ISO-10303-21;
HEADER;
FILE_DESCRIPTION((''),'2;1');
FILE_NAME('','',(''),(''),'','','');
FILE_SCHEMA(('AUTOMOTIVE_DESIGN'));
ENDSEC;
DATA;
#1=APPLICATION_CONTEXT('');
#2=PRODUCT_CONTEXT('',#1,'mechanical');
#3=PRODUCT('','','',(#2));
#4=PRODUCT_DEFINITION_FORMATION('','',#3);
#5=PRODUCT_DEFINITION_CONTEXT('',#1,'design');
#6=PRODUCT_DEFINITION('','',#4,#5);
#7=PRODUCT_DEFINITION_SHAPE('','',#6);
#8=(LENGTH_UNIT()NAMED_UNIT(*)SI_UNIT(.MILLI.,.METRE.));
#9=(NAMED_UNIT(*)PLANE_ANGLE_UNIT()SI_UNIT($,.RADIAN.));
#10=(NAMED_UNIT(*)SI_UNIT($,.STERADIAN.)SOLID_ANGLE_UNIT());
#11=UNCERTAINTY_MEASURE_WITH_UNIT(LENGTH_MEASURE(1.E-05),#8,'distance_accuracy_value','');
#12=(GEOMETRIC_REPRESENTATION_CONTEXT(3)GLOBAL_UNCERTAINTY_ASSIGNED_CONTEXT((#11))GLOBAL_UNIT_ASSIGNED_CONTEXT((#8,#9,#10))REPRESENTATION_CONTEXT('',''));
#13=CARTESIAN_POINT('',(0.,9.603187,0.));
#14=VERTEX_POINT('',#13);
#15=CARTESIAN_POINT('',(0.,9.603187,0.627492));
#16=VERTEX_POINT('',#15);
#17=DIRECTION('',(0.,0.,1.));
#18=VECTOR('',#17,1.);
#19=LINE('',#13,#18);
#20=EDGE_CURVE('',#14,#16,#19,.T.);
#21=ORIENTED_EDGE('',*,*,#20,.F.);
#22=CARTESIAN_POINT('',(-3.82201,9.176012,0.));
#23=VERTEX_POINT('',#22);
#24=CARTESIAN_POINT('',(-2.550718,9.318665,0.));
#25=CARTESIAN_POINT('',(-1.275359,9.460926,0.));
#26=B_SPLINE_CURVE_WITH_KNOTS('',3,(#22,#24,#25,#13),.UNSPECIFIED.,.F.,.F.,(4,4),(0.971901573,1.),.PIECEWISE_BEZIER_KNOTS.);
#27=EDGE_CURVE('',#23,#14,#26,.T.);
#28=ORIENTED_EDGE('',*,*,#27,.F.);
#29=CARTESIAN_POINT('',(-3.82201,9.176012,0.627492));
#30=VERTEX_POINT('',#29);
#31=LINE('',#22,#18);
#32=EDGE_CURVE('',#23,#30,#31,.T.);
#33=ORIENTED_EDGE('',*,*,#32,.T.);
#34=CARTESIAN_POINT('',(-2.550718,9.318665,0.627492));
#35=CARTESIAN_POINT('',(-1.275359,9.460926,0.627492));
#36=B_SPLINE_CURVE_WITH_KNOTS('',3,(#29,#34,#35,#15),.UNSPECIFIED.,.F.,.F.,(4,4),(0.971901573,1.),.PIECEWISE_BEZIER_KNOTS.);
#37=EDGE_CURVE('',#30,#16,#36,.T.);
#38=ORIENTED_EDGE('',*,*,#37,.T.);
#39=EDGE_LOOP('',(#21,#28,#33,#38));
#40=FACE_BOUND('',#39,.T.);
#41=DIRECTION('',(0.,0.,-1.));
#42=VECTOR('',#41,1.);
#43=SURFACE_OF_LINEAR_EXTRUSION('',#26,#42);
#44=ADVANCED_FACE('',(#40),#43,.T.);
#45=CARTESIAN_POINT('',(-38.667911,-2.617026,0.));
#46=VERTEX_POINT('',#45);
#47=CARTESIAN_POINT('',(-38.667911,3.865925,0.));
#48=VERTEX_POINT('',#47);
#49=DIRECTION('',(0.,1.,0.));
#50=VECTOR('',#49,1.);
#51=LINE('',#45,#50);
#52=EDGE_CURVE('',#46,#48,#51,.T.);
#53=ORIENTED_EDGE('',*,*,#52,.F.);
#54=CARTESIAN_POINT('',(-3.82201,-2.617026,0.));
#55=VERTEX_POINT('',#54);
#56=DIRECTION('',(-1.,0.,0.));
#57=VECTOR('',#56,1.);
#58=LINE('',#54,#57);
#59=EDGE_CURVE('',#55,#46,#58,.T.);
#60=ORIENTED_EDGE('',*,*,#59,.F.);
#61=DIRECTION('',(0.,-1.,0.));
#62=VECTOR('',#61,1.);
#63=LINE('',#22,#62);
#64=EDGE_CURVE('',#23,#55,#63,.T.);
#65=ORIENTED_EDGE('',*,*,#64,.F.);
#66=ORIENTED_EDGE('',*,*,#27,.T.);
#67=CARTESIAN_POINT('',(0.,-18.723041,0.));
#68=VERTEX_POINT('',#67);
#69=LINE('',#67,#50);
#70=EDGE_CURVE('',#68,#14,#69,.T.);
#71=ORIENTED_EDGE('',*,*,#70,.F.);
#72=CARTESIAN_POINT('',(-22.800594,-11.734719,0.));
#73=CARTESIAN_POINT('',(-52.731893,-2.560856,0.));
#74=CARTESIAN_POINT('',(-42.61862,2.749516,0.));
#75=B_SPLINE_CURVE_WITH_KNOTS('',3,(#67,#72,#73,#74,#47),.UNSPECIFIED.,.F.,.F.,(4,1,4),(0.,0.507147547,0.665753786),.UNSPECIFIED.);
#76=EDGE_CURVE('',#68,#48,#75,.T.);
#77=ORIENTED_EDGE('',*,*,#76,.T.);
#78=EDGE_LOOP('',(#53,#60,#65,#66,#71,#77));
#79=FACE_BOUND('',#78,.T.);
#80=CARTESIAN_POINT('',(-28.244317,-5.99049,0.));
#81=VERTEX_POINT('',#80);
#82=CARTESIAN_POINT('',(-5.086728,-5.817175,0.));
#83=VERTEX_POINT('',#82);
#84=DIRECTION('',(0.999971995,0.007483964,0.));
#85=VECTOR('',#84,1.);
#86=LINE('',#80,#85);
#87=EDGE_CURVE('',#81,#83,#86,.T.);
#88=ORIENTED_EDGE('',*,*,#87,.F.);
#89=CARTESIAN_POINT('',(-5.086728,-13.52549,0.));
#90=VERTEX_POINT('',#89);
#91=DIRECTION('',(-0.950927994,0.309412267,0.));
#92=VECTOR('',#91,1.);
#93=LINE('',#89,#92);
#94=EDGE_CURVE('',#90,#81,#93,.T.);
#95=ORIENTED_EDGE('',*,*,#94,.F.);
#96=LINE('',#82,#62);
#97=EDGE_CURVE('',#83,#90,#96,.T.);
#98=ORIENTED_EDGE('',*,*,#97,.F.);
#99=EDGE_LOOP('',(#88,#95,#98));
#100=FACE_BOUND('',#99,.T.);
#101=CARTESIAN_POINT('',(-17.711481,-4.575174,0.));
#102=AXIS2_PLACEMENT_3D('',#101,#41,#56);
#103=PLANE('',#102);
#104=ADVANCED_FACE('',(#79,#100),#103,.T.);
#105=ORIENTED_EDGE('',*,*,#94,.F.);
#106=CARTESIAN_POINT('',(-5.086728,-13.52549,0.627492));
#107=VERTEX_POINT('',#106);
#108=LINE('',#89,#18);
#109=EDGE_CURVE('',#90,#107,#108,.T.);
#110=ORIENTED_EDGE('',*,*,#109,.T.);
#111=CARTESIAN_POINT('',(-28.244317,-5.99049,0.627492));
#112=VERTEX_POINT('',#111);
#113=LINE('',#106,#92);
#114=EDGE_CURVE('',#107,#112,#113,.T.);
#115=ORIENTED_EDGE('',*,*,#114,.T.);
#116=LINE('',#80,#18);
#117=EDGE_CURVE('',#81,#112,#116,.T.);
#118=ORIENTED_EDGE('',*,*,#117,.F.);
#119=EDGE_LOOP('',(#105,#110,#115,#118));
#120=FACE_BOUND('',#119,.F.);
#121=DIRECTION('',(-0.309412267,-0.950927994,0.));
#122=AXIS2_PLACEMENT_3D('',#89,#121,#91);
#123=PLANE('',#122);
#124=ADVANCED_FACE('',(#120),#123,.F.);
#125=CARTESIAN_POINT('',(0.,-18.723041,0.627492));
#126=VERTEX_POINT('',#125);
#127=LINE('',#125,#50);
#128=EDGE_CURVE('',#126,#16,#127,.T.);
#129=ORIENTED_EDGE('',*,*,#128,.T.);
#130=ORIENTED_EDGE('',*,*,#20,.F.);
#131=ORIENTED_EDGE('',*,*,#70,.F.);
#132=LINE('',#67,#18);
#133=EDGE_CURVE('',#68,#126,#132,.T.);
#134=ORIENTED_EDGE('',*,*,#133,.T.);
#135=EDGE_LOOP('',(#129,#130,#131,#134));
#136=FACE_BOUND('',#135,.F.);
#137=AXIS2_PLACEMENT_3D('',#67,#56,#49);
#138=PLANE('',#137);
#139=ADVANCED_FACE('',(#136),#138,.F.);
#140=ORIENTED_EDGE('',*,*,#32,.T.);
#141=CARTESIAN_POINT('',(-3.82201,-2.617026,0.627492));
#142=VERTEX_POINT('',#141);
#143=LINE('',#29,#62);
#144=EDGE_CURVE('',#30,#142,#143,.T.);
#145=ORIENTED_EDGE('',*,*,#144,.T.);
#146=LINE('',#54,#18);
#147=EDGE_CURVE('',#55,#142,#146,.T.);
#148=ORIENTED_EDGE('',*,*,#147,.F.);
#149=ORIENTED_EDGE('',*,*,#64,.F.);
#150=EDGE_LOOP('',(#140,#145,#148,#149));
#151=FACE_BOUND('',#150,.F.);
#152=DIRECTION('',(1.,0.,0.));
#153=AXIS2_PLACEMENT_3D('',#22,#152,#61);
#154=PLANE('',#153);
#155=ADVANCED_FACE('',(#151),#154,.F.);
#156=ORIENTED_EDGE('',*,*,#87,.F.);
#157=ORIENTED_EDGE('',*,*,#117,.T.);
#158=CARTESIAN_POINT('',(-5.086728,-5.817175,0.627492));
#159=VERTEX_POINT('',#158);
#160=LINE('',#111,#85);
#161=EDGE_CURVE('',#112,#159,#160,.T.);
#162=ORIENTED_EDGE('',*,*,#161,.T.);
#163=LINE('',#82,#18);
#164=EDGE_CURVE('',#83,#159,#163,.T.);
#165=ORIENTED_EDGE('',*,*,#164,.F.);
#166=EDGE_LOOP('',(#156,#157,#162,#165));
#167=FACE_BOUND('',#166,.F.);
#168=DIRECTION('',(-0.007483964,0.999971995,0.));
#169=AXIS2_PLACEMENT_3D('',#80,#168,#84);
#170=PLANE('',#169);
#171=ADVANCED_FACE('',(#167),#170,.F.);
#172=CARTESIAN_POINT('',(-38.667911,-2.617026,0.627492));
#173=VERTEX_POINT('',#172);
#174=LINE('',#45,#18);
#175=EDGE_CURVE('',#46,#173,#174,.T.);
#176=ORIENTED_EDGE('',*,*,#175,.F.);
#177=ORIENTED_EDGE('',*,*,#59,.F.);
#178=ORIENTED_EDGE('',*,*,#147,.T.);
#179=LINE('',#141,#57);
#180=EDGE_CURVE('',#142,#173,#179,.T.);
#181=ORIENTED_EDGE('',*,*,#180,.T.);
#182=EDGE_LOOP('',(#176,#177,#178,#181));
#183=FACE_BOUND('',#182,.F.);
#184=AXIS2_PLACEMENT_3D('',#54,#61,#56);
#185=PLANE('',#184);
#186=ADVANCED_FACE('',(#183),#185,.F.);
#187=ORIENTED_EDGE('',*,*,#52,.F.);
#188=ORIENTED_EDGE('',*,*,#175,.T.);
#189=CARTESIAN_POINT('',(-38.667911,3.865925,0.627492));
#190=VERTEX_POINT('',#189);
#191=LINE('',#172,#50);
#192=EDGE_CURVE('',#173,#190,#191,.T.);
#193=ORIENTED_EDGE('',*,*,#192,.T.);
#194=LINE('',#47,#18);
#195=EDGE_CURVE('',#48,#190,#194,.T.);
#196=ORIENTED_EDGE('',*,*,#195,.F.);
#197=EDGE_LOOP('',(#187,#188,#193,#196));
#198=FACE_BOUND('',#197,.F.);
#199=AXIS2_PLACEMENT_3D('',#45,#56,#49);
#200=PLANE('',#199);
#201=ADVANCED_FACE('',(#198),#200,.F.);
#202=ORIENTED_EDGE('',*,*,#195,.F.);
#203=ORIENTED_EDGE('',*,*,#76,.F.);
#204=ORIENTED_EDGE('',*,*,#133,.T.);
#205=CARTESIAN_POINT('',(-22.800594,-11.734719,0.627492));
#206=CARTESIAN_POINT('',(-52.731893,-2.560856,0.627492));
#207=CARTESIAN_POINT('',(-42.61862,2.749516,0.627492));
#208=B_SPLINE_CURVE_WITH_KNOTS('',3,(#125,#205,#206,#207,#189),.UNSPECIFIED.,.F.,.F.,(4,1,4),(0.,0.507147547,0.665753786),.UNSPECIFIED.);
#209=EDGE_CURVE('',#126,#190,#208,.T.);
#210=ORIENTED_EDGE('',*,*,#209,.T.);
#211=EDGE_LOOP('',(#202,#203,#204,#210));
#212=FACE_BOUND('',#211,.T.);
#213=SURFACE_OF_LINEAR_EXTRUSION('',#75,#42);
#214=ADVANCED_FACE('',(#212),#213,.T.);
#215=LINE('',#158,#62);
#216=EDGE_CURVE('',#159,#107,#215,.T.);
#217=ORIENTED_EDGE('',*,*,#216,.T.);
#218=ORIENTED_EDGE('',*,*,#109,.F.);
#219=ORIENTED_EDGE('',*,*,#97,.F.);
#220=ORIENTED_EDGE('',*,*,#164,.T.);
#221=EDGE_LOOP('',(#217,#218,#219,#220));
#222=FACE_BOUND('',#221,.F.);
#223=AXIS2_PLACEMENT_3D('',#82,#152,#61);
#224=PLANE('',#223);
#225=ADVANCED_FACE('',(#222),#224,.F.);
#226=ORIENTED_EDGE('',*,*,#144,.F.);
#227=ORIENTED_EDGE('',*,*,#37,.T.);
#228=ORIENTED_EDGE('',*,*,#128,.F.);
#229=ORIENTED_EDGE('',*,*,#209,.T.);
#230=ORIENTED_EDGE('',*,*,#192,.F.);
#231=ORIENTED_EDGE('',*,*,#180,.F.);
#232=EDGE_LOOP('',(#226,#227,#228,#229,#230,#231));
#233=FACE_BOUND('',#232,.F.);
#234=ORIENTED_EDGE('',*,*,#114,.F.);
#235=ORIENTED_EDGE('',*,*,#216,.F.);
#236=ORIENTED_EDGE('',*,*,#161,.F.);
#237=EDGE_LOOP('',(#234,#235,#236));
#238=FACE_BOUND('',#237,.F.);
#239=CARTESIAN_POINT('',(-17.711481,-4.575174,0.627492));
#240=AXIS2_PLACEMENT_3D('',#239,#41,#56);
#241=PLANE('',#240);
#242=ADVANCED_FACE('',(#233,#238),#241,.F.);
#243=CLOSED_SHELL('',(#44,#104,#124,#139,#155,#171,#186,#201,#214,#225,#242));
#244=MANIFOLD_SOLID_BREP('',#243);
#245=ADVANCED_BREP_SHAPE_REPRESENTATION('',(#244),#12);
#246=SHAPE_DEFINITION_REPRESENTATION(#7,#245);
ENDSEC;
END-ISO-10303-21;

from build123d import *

# Parameters (mm, degrees)
F1_DEPTH = 0.6274920888


with BuildPart() as f1:
    # F0 (on Top) → F1 (new body)
    with BuildSketch(Plane.XY):
        with BuildLine():
            add(Edge.make_bspline(
                [(0, -18.7230408192), (-22.8005940455, -11.7347187551), (-52.7318931928, -2.5608557428), (-42.6186198614, 2.7495160437), (-38.6679108208, 3.8659247252)],
                knots=[0, 0, 0, 0, 0.5071475473, 0.6657537861, 0.6657537861, 0.6657537861, 0.6657537861], degree=3))
            Line((0, -18.7230408192), (0, -2.6170264397))
            Line((0, -2.6170264397), (0, 9.6031874418))
            add(Edge.make_bspline(
                [(-3.8220100603, 9.1760117782), (-2.5507177683, 9.3186652316), (-1.275358836, 9.4609263335), (0, 9.6031874418)],
                knots=[0.9719015733, 0.9719015733, 0.9719015733, 0.9719015733, 1, 1, 1, 1], degree=3))
            Line((-3.8220100603, 9.1760117782), (-3.8220100603, -2.6170264397))
            Line((-3.8220100603, -2.6170264397), (-38.6679108208, -2.6170264397))
            Line((-38.6679108208, -2.6170264397), (-38.6679108208, 3.8659247252))
        make_face()
        Polygon((-5.0867283717, -13.5254897177), (-28.2443165779, -5.9904903173), (-5.0867283717, -5.8171749115), align=None, mode=Mode.SUBTRACT)
    extrude(amount=F1_DEPTH)


solid = f1.part
